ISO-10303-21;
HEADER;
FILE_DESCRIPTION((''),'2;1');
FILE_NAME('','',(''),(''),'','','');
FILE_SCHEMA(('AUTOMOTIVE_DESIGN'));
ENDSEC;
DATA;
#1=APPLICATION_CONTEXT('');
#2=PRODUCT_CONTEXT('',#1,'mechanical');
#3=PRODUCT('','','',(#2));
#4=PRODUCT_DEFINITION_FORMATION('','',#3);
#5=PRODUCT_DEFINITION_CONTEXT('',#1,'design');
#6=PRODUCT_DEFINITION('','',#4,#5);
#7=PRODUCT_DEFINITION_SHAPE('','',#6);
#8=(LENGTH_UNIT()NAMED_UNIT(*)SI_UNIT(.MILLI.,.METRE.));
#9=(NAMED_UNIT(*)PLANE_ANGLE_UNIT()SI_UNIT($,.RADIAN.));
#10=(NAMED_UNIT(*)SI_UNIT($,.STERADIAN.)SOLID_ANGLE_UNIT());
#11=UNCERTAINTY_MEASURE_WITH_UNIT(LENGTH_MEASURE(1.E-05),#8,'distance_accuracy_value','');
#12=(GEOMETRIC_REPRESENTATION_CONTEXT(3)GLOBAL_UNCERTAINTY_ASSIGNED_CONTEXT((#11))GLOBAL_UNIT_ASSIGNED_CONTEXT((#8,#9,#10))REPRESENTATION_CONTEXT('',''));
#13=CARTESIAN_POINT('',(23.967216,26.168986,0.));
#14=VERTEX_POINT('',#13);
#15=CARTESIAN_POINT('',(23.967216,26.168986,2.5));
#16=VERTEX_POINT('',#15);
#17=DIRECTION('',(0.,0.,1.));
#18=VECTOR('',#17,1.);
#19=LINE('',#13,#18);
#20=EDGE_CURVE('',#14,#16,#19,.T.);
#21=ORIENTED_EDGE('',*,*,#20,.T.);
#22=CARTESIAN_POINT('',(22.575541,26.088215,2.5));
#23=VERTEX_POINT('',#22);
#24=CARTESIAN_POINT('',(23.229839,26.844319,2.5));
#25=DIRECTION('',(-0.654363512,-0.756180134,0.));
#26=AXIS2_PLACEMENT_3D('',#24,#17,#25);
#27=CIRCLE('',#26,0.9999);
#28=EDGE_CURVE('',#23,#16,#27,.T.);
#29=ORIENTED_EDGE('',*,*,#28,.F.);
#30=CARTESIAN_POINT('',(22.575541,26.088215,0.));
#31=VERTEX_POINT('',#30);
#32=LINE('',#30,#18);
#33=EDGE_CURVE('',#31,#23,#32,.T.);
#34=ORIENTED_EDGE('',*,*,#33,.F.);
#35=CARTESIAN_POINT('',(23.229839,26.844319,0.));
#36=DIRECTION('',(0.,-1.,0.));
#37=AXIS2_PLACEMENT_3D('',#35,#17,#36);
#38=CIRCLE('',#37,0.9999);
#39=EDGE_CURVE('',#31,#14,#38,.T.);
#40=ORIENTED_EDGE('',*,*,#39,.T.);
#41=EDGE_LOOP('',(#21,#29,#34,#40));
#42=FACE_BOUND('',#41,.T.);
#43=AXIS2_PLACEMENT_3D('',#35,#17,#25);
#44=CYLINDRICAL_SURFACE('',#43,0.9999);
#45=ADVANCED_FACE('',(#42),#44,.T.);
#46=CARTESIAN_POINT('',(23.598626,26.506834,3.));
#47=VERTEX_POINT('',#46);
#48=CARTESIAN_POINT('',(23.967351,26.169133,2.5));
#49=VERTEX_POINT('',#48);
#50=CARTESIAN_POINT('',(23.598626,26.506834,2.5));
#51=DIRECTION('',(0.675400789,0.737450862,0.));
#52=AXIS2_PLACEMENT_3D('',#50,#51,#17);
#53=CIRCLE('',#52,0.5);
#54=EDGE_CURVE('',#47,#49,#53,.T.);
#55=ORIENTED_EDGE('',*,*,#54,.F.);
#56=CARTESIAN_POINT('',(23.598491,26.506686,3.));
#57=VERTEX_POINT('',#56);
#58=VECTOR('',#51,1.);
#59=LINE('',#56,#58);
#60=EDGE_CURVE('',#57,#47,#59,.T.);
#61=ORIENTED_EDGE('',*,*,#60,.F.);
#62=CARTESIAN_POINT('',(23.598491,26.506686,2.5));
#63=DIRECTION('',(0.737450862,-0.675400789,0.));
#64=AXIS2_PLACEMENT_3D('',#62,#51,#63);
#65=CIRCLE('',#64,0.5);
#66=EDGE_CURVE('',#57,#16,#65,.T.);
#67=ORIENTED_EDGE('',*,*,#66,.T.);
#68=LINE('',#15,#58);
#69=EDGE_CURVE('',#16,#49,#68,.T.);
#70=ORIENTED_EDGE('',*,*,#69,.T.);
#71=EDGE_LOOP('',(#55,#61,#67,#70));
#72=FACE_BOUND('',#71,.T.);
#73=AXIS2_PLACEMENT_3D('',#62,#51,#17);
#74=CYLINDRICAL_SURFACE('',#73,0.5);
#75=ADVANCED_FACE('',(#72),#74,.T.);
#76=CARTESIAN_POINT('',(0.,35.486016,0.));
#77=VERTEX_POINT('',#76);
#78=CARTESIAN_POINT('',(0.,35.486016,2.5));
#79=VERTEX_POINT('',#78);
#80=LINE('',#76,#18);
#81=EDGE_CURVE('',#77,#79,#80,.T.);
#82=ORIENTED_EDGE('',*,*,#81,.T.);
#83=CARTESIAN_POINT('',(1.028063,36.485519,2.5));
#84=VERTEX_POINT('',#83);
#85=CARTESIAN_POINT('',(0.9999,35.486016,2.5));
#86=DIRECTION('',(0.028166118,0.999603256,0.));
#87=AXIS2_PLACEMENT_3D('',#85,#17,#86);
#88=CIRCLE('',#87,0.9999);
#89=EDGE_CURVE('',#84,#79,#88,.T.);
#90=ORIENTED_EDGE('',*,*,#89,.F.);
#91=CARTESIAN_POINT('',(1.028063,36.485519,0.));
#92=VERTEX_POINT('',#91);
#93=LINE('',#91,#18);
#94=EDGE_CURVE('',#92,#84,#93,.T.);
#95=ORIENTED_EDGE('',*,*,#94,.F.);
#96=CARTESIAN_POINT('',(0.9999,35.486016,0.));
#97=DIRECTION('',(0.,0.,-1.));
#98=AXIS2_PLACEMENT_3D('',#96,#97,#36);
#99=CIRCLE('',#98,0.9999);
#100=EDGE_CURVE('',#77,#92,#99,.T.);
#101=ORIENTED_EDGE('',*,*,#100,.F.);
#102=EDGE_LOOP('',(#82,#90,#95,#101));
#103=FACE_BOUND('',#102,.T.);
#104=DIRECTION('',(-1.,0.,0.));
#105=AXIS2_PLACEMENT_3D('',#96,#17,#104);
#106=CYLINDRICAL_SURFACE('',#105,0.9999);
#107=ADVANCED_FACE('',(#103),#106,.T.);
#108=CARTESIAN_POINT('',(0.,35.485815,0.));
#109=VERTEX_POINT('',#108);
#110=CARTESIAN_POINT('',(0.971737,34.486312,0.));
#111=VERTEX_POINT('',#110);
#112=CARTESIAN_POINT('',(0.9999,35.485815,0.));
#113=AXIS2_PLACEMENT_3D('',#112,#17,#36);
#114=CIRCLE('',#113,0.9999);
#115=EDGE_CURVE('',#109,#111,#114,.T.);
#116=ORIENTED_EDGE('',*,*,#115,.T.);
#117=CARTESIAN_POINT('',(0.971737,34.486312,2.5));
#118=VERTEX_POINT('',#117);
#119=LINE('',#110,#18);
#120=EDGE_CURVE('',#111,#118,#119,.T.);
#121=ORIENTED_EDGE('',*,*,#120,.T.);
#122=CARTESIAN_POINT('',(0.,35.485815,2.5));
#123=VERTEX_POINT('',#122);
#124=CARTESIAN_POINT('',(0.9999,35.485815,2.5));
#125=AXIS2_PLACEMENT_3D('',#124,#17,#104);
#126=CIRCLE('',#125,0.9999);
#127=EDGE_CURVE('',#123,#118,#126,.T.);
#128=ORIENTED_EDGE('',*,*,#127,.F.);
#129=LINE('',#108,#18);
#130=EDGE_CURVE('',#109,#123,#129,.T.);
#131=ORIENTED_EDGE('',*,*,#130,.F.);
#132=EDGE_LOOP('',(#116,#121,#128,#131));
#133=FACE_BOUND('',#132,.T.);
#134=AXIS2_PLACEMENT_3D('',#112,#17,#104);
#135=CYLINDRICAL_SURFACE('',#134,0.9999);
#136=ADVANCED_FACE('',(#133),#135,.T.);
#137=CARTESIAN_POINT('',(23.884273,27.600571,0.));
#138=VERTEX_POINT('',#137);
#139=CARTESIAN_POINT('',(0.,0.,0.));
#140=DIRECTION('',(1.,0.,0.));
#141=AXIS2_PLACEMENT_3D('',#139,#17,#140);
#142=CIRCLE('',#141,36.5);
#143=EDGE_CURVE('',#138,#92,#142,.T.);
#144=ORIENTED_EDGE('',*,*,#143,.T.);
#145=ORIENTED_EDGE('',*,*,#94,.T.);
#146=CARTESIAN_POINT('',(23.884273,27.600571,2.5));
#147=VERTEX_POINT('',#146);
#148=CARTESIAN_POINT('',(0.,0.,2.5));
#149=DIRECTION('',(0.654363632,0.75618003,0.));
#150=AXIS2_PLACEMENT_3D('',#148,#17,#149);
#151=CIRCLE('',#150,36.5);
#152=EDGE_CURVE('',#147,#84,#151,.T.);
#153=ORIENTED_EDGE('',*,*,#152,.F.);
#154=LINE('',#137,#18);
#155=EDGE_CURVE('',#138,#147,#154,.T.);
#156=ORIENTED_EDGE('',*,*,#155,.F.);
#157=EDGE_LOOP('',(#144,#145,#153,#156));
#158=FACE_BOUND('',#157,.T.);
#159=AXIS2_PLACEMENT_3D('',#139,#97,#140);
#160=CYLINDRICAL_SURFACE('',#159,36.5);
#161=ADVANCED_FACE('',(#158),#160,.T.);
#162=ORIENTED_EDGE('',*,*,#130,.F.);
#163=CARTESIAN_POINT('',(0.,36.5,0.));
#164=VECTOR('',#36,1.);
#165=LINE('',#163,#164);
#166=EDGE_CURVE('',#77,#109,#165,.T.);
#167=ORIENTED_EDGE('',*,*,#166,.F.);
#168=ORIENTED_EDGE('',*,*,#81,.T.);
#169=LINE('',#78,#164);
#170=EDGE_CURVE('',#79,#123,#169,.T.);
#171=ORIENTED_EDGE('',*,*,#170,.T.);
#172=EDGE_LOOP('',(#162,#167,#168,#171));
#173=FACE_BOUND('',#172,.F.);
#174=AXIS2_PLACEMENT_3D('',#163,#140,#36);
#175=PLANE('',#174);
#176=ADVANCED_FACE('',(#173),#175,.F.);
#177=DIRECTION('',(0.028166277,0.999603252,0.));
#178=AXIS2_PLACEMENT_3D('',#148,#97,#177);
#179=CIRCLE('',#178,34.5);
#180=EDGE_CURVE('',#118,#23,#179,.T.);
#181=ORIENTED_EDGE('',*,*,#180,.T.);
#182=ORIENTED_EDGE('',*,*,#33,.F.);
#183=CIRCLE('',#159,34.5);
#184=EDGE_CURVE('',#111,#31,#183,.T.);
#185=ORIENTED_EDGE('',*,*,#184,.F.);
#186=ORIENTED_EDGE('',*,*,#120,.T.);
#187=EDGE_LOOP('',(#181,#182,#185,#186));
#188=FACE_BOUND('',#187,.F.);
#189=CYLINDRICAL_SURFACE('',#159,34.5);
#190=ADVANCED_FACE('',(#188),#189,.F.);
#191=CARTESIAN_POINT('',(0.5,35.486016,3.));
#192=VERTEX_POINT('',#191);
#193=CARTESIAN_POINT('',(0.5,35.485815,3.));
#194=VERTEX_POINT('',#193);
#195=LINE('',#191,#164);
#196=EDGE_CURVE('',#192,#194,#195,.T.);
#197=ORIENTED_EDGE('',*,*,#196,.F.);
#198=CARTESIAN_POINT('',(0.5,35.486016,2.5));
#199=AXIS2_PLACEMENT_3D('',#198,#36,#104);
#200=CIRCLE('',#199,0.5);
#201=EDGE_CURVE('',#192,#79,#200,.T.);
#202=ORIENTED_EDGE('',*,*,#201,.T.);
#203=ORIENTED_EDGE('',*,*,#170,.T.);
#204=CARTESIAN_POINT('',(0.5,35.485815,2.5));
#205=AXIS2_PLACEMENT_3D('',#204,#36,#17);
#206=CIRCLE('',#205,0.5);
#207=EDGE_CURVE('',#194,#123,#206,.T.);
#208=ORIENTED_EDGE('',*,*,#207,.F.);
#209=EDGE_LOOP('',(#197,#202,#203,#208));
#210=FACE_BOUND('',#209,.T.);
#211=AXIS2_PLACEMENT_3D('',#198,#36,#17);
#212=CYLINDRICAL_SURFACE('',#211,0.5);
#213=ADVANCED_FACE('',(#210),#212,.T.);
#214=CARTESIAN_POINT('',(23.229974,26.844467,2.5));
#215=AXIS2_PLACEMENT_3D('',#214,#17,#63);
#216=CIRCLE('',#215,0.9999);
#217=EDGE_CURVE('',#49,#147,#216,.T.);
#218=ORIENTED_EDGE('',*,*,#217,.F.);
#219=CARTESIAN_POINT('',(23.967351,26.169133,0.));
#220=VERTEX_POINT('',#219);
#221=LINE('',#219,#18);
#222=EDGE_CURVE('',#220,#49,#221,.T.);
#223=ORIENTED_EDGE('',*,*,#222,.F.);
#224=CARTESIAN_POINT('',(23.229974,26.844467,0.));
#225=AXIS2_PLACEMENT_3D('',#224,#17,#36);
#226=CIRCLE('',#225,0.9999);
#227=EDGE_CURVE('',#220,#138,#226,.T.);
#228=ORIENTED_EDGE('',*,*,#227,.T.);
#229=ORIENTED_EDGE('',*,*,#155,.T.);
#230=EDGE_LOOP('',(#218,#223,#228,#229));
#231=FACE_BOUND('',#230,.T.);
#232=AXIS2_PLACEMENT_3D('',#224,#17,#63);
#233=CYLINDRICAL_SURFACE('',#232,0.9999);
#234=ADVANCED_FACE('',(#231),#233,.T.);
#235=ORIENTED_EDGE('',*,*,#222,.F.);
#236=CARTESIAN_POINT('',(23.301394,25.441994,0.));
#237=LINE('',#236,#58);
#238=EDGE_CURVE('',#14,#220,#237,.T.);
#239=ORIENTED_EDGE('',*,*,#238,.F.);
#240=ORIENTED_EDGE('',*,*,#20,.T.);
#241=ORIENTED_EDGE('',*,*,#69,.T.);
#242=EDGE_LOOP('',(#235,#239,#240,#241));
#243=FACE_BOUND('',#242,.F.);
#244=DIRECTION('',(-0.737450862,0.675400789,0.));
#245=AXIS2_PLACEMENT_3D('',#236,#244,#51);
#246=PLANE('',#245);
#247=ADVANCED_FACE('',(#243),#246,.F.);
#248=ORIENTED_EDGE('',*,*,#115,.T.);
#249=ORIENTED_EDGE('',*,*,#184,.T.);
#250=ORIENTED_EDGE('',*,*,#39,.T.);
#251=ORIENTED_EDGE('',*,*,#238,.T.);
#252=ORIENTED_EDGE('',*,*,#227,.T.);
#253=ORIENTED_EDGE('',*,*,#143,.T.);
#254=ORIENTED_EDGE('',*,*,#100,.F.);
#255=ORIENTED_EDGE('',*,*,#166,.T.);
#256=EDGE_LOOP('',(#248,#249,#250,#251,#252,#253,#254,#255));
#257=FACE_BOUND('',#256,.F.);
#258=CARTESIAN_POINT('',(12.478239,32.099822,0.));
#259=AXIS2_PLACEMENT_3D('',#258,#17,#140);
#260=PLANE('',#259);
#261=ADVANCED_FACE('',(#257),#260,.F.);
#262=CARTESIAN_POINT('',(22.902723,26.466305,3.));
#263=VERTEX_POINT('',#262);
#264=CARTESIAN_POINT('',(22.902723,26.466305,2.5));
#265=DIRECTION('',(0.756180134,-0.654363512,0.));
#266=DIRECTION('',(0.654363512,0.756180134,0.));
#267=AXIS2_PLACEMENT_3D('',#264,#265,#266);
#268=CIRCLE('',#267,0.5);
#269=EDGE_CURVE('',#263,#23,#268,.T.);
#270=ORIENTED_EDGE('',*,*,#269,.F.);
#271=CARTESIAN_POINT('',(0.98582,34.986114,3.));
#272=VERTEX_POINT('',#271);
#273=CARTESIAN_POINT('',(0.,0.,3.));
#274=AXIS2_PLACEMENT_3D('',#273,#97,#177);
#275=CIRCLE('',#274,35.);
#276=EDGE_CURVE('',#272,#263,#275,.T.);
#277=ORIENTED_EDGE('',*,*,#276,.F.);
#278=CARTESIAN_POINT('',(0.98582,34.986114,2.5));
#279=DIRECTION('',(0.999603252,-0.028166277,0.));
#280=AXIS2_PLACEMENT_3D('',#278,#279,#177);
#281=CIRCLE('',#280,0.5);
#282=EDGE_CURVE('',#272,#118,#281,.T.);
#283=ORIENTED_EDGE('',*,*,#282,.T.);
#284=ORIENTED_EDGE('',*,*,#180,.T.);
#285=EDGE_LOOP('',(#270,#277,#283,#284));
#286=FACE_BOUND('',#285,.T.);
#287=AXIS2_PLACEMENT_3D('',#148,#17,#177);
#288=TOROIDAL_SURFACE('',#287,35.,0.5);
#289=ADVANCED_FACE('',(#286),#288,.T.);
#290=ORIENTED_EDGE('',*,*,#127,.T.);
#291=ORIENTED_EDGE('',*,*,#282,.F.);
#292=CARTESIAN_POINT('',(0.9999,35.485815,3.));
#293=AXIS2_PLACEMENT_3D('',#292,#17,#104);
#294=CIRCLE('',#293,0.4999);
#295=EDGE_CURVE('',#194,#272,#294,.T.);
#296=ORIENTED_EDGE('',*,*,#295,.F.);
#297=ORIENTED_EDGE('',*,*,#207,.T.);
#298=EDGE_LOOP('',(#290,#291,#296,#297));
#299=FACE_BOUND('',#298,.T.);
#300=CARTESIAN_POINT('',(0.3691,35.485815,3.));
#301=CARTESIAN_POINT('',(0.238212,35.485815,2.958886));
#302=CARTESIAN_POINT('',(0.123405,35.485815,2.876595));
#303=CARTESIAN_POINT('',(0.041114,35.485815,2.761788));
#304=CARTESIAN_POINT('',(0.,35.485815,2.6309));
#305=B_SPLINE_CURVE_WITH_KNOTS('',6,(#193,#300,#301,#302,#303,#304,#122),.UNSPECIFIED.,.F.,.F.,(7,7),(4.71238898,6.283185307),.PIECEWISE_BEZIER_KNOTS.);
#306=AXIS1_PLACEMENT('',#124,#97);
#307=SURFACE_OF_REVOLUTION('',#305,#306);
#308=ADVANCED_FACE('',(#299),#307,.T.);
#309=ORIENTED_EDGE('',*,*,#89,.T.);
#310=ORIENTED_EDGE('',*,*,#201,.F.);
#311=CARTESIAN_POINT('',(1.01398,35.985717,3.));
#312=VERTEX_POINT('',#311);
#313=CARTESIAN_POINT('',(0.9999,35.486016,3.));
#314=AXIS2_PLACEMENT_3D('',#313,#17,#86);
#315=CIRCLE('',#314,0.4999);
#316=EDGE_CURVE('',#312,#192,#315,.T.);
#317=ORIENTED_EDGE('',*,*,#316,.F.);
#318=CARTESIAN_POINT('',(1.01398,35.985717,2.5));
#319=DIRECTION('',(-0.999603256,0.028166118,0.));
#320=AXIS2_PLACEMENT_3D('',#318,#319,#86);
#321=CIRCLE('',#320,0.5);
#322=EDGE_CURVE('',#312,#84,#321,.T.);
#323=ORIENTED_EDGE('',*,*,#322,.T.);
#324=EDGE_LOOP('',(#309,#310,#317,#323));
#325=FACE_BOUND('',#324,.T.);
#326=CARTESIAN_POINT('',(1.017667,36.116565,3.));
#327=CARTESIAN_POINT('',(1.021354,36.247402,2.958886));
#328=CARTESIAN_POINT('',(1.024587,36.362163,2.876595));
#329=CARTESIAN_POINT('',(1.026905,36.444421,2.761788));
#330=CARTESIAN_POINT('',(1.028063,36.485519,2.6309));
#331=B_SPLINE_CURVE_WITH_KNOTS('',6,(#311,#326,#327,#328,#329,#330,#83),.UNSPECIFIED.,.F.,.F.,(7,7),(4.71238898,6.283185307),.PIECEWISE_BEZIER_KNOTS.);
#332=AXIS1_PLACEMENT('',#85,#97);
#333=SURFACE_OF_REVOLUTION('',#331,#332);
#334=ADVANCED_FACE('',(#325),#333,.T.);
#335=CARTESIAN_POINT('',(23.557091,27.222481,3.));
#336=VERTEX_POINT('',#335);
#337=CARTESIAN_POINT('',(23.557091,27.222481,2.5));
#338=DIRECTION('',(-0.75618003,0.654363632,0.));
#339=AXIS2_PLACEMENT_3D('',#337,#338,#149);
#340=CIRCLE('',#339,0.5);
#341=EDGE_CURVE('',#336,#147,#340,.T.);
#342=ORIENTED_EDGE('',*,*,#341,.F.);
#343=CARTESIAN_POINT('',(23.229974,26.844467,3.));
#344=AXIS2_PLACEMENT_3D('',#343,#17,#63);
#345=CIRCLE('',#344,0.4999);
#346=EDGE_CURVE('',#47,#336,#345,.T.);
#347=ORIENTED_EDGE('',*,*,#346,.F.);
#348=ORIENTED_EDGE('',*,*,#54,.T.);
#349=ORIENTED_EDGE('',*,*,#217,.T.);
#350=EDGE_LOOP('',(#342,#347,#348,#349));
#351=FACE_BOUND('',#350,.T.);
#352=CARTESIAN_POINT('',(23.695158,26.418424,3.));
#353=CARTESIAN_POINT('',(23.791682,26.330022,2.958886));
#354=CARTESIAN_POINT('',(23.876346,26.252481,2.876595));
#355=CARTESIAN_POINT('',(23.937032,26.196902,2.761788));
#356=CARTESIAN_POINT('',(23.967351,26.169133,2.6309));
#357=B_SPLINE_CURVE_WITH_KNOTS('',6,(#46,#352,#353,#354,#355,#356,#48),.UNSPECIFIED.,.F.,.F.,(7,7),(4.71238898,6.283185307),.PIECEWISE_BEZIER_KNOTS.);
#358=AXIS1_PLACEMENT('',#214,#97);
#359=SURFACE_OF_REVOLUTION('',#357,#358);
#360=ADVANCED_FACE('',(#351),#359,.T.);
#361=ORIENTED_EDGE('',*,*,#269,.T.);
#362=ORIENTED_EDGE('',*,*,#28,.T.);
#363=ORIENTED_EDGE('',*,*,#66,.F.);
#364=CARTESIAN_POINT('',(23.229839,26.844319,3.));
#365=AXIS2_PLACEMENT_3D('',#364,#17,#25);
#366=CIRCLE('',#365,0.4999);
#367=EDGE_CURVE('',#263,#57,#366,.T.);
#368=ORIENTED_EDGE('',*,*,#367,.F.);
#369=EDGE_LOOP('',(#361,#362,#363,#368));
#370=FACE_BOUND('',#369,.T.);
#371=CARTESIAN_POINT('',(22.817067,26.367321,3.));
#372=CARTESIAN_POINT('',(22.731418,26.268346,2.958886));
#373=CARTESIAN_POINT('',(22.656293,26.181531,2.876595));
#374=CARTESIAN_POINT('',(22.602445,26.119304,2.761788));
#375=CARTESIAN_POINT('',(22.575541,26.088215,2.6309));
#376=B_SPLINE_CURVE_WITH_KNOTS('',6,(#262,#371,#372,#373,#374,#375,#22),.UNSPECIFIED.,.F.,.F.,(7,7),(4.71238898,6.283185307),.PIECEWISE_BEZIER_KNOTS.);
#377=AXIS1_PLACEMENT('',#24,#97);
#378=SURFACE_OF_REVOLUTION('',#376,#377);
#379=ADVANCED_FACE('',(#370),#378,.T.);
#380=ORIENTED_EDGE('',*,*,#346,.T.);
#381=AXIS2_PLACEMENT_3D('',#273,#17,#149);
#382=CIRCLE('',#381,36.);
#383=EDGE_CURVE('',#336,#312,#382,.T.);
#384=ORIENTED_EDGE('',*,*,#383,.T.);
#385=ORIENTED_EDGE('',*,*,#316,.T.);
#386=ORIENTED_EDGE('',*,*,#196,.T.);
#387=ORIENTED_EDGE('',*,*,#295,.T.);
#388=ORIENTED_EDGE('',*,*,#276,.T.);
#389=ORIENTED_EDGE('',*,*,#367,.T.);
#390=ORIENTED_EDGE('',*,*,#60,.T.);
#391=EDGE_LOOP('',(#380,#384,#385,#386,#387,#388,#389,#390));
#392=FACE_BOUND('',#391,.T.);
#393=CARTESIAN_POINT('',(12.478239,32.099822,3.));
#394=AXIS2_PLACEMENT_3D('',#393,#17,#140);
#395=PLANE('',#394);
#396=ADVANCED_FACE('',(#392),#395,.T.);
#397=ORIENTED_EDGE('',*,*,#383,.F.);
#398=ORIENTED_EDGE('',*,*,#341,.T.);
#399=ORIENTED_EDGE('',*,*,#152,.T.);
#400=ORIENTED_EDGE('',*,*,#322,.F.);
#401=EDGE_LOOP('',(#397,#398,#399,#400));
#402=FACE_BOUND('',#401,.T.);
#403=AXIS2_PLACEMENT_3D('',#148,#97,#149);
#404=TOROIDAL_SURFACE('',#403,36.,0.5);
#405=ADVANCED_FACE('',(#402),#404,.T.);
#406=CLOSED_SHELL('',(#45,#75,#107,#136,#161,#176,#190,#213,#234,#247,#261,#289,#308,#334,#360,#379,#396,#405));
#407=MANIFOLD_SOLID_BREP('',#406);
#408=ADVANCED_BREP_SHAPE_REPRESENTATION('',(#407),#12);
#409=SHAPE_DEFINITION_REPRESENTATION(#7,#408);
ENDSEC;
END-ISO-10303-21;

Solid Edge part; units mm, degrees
sketch "Sketch1" plane through (0, 0, 0) normal (0, 0, 1) x (1, 0, 0)
  line L0 (0, 36.5) -> (0, 34.5)
  line L1 (23.3014, 25.442) -> (24.6522, 26.9169)
  arc A0 (24.6522, 26.9169) -> (0, 36.5) centre (0, 0) ccw
  arc A1 (0, 34.5) -> (23.3014, 25.442) centre (0, 0) cw
extrude "Protrusion1" add sketch "Sketch1" along normal blind 3
fillet "Round___Side" radius 1 4 edges at (23.3014, 25.442, 1.5) (24.6522, 26.9169, 1.5) (0, 36.5, 1.5) (0, 34.5, 1.5)
fillet "Round___Top" radius 0.5 3 edges at (12.5, 32.1559, 3) (13.2246, 34.02, 3) (0.0004, 35.5141, 3)
properties material "Silicone"
